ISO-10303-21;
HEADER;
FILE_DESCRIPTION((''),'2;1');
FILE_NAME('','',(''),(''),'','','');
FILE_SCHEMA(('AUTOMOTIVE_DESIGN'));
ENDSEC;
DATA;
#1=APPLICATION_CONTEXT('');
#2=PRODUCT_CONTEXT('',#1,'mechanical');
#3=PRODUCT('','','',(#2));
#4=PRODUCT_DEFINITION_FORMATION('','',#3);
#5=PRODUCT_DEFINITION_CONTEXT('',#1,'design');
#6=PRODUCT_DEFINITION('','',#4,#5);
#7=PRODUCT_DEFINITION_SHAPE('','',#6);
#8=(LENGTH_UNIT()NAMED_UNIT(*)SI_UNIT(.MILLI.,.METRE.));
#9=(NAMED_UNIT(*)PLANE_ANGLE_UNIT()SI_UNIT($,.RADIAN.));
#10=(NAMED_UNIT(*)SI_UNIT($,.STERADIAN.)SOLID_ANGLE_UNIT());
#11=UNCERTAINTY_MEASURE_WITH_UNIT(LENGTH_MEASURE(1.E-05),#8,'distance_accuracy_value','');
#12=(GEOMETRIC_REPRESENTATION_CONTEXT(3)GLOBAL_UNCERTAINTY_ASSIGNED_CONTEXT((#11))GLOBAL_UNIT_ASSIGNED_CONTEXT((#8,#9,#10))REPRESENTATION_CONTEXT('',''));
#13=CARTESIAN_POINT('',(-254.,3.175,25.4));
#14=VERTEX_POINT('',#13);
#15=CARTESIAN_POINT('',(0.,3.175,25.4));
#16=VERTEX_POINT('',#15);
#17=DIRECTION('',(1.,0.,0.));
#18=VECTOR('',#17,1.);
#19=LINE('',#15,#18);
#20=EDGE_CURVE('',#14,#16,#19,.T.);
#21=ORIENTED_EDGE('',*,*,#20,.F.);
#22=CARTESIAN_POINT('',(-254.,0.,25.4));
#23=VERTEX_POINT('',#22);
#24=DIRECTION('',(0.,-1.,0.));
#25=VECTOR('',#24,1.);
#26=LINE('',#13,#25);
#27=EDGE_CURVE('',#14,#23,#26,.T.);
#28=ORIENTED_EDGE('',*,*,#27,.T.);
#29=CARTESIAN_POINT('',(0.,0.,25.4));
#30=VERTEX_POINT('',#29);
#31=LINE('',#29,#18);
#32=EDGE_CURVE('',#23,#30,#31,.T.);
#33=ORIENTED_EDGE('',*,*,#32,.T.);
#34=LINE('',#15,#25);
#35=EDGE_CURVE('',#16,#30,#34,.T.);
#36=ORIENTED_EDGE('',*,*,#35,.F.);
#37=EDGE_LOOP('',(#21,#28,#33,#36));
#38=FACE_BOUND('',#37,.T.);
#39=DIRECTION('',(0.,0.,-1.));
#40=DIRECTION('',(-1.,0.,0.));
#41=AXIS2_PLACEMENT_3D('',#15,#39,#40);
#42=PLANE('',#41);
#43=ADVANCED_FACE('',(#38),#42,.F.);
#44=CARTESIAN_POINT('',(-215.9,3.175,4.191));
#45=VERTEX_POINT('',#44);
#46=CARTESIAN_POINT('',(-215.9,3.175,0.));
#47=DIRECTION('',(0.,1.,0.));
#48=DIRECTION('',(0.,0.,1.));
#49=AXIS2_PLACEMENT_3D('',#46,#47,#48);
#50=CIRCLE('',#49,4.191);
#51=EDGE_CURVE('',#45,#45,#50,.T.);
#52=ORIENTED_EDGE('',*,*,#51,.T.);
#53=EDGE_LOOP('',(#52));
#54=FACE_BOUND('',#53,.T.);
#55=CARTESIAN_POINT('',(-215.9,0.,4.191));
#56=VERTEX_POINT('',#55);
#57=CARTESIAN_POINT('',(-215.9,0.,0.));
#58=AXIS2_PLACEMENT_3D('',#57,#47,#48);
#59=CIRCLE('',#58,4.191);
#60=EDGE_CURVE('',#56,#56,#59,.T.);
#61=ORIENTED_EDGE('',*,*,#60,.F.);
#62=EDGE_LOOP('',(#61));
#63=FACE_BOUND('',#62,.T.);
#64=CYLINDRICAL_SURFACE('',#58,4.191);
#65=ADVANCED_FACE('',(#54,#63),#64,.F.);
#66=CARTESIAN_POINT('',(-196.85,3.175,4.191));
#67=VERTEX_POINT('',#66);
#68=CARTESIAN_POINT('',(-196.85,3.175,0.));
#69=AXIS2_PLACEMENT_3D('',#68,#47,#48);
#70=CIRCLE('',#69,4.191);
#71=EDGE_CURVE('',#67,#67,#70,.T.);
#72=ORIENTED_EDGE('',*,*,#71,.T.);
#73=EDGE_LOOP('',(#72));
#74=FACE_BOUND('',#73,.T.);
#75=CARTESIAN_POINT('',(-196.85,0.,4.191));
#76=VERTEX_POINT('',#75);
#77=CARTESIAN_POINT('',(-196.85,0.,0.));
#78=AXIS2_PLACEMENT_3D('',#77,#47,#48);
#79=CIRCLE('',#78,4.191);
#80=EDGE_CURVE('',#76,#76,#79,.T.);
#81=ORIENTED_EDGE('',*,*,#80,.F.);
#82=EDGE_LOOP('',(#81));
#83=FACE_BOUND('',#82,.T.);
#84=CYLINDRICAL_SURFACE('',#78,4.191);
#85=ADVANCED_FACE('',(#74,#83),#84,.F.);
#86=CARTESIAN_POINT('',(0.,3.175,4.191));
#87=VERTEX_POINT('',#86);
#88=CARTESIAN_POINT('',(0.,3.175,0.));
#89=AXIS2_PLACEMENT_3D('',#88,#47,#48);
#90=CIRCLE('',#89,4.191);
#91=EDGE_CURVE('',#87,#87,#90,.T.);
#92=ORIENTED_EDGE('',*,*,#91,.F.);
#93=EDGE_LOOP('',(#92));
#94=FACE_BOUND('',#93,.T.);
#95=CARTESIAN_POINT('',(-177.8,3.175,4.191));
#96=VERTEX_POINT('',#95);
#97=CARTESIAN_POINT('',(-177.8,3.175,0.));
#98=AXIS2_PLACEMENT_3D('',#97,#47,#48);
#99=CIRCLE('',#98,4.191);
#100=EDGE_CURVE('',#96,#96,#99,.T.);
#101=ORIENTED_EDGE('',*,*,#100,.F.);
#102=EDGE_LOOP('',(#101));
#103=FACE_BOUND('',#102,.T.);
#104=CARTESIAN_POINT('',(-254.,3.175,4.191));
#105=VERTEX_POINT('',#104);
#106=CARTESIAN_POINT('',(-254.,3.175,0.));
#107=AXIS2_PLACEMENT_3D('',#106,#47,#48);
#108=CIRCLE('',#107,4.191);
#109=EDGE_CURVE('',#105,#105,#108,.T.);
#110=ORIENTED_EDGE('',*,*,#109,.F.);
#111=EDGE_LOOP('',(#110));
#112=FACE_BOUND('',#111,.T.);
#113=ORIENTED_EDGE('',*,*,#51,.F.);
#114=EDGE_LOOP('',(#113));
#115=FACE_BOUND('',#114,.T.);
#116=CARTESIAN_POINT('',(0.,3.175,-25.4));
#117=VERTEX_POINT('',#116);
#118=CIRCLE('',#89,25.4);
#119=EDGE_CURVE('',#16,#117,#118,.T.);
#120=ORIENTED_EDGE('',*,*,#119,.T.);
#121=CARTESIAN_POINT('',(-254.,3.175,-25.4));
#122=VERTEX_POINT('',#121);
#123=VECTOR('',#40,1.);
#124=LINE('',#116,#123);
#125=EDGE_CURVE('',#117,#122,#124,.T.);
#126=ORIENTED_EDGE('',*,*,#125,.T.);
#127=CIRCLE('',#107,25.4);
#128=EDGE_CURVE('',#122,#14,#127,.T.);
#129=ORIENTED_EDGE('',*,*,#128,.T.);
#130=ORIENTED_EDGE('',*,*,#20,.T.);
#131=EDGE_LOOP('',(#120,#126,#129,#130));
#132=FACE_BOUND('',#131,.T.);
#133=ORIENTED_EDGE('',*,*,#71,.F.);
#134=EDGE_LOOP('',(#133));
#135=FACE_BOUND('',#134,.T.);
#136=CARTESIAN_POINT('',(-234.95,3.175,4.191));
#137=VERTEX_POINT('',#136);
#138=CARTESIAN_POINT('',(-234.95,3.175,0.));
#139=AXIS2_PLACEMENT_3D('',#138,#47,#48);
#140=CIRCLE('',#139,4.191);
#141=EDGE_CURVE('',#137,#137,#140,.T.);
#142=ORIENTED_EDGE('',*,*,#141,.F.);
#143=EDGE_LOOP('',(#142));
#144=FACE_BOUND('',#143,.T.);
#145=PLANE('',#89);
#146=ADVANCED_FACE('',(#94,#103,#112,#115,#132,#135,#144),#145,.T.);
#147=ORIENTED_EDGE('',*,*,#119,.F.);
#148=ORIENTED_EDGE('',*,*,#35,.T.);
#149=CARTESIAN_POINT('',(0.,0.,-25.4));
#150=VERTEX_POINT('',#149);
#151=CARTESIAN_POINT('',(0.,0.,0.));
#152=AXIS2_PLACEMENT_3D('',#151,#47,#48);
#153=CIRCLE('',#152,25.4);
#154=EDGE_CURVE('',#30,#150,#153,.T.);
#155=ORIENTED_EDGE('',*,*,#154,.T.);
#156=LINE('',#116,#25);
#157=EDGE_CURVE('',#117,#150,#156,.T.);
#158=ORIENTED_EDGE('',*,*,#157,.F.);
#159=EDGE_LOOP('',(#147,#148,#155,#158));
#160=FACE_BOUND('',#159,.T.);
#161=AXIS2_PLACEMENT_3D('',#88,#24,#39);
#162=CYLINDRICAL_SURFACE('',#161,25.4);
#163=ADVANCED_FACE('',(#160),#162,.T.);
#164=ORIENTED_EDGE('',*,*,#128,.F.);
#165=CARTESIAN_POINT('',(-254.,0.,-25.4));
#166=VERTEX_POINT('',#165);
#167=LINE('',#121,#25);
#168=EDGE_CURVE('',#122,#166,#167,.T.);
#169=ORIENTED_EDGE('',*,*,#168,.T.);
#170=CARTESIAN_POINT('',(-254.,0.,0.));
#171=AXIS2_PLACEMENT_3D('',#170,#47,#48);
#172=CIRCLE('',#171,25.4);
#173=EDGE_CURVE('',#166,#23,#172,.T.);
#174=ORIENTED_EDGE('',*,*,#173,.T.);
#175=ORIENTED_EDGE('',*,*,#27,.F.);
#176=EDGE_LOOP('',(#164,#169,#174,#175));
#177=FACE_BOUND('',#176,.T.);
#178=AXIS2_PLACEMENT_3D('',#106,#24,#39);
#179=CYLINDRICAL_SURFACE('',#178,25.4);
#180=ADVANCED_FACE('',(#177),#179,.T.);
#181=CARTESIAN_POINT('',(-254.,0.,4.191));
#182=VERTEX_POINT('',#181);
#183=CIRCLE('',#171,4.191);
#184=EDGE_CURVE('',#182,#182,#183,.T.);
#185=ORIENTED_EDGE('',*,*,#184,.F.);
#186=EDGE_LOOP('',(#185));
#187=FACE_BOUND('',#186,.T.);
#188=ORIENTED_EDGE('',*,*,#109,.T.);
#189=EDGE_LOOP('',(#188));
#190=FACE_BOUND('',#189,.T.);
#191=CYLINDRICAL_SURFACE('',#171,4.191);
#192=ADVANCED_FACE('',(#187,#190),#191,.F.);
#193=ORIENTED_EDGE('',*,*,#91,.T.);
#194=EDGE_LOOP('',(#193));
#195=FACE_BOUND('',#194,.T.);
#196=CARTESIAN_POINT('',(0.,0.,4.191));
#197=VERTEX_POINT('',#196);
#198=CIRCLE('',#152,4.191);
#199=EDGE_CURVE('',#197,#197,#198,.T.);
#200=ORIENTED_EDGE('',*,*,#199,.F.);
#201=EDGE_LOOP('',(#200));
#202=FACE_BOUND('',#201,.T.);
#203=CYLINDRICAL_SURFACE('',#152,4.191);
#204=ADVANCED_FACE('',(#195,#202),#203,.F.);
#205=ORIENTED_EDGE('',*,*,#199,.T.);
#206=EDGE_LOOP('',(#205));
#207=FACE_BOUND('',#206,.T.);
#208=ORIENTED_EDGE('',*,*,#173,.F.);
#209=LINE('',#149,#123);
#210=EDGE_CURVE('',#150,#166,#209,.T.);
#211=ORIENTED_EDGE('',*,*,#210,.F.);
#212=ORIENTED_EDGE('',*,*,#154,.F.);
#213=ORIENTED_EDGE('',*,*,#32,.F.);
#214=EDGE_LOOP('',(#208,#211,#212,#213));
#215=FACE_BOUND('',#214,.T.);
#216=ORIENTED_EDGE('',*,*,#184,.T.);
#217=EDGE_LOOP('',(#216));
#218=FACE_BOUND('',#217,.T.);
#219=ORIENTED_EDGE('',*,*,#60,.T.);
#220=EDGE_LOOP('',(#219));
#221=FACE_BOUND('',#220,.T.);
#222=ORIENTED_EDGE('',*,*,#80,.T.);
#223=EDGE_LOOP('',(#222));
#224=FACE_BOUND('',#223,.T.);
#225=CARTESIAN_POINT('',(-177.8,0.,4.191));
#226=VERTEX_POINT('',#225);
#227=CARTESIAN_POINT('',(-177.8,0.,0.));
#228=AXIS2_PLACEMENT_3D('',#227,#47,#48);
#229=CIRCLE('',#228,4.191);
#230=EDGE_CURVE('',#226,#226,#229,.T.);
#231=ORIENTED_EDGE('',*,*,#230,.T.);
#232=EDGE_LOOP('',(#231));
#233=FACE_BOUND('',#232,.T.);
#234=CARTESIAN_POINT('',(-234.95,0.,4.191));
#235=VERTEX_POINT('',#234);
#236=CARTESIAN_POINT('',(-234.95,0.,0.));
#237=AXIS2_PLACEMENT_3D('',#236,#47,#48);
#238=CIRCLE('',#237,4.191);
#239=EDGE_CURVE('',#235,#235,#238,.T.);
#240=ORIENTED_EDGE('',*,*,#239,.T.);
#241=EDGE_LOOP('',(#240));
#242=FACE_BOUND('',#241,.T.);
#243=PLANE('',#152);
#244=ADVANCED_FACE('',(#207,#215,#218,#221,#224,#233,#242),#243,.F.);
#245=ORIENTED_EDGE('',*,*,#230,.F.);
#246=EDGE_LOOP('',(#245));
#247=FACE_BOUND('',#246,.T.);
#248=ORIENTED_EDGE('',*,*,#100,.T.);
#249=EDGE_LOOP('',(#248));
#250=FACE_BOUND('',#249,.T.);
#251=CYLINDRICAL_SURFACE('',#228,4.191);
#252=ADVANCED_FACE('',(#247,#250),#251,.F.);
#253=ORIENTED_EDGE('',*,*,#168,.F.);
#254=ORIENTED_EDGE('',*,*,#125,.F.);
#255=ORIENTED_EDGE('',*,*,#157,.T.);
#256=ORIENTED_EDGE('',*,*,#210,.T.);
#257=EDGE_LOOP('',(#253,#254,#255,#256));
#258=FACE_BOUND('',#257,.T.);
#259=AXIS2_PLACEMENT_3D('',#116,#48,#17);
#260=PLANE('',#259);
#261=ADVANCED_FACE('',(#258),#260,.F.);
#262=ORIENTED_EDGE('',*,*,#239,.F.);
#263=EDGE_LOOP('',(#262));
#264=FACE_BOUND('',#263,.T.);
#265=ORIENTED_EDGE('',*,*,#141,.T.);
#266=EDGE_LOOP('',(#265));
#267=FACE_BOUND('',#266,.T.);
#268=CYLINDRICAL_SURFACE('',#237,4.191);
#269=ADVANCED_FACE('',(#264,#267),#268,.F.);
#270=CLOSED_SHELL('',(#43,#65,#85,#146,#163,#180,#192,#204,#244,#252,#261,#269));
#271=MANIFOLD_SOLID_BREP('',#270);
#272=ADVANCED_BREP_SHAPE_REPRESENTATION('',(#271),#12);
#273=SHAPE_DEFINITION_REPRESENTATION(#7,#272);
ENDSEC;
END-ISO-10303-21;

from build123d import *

# Parameters (mm, degrees)
BOSS_EXTRUDE1_DEPTH = 3.175
SKETCH3_R           = 4.191
CUT_EXTRUDE1_DEPTH  = 281.570134948
LPATTERN1_OUTLINE_R = 4.191
LPATTERN1_DEPTH     = 3.175


# Read off the part's stored shape, not the designer's step: LPattern1
with BuildPart() as part:
    # Sketch1 → Boss-Extrude1 (new body)
    with BuildSketch(Plane(origin=(0, 0, 0), x_dir=(1, 0, 0), z_dir=(0, 1, 0))):
        with BuildLine():
            Line((0, 25.4), (-254, 25.4))
            ThreePointArc((-254, 25.4), (-279.4, 0), (-254, -25.4))
            Line((-254, -25.4), (0, -25.4))
            ThreePointArc((0, -25.4), (25.4, 0), (0, 25.4))
        make_face()
    extrude(amount=BOSS_EXTRUDE1_DEPTH)

    # Sketch3 → Cut-Extrude1 (cut, through all)
    with BuildSketch(Plane(origin=(0, 3.175, 0), x_dir=(1, 0, 0), z_dir=(0, 1, 0))):
        with Locations(Location((0, 0, 0), (0, 0, 270))):
            Circle(SKETCH3_R)
        with Locations(Location((-254, 0, 0), (0, 0, 270))):
            Circle(SKETCH3_R)
    extrude(amount=-CUT_EXTRUDE1_DEPTH, mode=Mode.SUBTRACT)

    # LPattern1 outline → LPattern1 (cut)
    with BuildSketch(Plane(origin=(0, 0, 0), x_dir=(1, 0, 0), z_dir=(0, 1, 0))):
        with Locations((-177.8, 0)):
            Circle(LPATTERN1_OUTLINE_R)
        with Locations((-196.85, 0)):
            Circle(LPATTERN1_OUTLINE_R)
        with Locations((-215.9, 0)):
            Circle(LPATTERN1_OUTLINE_R)
        with Locations((-234.95, 0)):
            Circle(LPATTERN1_OUTLINE_R)
    extrude(amount=LPATTERN1_DEPTH, mode=Mode.SUBTRACT)


solid = part.part
